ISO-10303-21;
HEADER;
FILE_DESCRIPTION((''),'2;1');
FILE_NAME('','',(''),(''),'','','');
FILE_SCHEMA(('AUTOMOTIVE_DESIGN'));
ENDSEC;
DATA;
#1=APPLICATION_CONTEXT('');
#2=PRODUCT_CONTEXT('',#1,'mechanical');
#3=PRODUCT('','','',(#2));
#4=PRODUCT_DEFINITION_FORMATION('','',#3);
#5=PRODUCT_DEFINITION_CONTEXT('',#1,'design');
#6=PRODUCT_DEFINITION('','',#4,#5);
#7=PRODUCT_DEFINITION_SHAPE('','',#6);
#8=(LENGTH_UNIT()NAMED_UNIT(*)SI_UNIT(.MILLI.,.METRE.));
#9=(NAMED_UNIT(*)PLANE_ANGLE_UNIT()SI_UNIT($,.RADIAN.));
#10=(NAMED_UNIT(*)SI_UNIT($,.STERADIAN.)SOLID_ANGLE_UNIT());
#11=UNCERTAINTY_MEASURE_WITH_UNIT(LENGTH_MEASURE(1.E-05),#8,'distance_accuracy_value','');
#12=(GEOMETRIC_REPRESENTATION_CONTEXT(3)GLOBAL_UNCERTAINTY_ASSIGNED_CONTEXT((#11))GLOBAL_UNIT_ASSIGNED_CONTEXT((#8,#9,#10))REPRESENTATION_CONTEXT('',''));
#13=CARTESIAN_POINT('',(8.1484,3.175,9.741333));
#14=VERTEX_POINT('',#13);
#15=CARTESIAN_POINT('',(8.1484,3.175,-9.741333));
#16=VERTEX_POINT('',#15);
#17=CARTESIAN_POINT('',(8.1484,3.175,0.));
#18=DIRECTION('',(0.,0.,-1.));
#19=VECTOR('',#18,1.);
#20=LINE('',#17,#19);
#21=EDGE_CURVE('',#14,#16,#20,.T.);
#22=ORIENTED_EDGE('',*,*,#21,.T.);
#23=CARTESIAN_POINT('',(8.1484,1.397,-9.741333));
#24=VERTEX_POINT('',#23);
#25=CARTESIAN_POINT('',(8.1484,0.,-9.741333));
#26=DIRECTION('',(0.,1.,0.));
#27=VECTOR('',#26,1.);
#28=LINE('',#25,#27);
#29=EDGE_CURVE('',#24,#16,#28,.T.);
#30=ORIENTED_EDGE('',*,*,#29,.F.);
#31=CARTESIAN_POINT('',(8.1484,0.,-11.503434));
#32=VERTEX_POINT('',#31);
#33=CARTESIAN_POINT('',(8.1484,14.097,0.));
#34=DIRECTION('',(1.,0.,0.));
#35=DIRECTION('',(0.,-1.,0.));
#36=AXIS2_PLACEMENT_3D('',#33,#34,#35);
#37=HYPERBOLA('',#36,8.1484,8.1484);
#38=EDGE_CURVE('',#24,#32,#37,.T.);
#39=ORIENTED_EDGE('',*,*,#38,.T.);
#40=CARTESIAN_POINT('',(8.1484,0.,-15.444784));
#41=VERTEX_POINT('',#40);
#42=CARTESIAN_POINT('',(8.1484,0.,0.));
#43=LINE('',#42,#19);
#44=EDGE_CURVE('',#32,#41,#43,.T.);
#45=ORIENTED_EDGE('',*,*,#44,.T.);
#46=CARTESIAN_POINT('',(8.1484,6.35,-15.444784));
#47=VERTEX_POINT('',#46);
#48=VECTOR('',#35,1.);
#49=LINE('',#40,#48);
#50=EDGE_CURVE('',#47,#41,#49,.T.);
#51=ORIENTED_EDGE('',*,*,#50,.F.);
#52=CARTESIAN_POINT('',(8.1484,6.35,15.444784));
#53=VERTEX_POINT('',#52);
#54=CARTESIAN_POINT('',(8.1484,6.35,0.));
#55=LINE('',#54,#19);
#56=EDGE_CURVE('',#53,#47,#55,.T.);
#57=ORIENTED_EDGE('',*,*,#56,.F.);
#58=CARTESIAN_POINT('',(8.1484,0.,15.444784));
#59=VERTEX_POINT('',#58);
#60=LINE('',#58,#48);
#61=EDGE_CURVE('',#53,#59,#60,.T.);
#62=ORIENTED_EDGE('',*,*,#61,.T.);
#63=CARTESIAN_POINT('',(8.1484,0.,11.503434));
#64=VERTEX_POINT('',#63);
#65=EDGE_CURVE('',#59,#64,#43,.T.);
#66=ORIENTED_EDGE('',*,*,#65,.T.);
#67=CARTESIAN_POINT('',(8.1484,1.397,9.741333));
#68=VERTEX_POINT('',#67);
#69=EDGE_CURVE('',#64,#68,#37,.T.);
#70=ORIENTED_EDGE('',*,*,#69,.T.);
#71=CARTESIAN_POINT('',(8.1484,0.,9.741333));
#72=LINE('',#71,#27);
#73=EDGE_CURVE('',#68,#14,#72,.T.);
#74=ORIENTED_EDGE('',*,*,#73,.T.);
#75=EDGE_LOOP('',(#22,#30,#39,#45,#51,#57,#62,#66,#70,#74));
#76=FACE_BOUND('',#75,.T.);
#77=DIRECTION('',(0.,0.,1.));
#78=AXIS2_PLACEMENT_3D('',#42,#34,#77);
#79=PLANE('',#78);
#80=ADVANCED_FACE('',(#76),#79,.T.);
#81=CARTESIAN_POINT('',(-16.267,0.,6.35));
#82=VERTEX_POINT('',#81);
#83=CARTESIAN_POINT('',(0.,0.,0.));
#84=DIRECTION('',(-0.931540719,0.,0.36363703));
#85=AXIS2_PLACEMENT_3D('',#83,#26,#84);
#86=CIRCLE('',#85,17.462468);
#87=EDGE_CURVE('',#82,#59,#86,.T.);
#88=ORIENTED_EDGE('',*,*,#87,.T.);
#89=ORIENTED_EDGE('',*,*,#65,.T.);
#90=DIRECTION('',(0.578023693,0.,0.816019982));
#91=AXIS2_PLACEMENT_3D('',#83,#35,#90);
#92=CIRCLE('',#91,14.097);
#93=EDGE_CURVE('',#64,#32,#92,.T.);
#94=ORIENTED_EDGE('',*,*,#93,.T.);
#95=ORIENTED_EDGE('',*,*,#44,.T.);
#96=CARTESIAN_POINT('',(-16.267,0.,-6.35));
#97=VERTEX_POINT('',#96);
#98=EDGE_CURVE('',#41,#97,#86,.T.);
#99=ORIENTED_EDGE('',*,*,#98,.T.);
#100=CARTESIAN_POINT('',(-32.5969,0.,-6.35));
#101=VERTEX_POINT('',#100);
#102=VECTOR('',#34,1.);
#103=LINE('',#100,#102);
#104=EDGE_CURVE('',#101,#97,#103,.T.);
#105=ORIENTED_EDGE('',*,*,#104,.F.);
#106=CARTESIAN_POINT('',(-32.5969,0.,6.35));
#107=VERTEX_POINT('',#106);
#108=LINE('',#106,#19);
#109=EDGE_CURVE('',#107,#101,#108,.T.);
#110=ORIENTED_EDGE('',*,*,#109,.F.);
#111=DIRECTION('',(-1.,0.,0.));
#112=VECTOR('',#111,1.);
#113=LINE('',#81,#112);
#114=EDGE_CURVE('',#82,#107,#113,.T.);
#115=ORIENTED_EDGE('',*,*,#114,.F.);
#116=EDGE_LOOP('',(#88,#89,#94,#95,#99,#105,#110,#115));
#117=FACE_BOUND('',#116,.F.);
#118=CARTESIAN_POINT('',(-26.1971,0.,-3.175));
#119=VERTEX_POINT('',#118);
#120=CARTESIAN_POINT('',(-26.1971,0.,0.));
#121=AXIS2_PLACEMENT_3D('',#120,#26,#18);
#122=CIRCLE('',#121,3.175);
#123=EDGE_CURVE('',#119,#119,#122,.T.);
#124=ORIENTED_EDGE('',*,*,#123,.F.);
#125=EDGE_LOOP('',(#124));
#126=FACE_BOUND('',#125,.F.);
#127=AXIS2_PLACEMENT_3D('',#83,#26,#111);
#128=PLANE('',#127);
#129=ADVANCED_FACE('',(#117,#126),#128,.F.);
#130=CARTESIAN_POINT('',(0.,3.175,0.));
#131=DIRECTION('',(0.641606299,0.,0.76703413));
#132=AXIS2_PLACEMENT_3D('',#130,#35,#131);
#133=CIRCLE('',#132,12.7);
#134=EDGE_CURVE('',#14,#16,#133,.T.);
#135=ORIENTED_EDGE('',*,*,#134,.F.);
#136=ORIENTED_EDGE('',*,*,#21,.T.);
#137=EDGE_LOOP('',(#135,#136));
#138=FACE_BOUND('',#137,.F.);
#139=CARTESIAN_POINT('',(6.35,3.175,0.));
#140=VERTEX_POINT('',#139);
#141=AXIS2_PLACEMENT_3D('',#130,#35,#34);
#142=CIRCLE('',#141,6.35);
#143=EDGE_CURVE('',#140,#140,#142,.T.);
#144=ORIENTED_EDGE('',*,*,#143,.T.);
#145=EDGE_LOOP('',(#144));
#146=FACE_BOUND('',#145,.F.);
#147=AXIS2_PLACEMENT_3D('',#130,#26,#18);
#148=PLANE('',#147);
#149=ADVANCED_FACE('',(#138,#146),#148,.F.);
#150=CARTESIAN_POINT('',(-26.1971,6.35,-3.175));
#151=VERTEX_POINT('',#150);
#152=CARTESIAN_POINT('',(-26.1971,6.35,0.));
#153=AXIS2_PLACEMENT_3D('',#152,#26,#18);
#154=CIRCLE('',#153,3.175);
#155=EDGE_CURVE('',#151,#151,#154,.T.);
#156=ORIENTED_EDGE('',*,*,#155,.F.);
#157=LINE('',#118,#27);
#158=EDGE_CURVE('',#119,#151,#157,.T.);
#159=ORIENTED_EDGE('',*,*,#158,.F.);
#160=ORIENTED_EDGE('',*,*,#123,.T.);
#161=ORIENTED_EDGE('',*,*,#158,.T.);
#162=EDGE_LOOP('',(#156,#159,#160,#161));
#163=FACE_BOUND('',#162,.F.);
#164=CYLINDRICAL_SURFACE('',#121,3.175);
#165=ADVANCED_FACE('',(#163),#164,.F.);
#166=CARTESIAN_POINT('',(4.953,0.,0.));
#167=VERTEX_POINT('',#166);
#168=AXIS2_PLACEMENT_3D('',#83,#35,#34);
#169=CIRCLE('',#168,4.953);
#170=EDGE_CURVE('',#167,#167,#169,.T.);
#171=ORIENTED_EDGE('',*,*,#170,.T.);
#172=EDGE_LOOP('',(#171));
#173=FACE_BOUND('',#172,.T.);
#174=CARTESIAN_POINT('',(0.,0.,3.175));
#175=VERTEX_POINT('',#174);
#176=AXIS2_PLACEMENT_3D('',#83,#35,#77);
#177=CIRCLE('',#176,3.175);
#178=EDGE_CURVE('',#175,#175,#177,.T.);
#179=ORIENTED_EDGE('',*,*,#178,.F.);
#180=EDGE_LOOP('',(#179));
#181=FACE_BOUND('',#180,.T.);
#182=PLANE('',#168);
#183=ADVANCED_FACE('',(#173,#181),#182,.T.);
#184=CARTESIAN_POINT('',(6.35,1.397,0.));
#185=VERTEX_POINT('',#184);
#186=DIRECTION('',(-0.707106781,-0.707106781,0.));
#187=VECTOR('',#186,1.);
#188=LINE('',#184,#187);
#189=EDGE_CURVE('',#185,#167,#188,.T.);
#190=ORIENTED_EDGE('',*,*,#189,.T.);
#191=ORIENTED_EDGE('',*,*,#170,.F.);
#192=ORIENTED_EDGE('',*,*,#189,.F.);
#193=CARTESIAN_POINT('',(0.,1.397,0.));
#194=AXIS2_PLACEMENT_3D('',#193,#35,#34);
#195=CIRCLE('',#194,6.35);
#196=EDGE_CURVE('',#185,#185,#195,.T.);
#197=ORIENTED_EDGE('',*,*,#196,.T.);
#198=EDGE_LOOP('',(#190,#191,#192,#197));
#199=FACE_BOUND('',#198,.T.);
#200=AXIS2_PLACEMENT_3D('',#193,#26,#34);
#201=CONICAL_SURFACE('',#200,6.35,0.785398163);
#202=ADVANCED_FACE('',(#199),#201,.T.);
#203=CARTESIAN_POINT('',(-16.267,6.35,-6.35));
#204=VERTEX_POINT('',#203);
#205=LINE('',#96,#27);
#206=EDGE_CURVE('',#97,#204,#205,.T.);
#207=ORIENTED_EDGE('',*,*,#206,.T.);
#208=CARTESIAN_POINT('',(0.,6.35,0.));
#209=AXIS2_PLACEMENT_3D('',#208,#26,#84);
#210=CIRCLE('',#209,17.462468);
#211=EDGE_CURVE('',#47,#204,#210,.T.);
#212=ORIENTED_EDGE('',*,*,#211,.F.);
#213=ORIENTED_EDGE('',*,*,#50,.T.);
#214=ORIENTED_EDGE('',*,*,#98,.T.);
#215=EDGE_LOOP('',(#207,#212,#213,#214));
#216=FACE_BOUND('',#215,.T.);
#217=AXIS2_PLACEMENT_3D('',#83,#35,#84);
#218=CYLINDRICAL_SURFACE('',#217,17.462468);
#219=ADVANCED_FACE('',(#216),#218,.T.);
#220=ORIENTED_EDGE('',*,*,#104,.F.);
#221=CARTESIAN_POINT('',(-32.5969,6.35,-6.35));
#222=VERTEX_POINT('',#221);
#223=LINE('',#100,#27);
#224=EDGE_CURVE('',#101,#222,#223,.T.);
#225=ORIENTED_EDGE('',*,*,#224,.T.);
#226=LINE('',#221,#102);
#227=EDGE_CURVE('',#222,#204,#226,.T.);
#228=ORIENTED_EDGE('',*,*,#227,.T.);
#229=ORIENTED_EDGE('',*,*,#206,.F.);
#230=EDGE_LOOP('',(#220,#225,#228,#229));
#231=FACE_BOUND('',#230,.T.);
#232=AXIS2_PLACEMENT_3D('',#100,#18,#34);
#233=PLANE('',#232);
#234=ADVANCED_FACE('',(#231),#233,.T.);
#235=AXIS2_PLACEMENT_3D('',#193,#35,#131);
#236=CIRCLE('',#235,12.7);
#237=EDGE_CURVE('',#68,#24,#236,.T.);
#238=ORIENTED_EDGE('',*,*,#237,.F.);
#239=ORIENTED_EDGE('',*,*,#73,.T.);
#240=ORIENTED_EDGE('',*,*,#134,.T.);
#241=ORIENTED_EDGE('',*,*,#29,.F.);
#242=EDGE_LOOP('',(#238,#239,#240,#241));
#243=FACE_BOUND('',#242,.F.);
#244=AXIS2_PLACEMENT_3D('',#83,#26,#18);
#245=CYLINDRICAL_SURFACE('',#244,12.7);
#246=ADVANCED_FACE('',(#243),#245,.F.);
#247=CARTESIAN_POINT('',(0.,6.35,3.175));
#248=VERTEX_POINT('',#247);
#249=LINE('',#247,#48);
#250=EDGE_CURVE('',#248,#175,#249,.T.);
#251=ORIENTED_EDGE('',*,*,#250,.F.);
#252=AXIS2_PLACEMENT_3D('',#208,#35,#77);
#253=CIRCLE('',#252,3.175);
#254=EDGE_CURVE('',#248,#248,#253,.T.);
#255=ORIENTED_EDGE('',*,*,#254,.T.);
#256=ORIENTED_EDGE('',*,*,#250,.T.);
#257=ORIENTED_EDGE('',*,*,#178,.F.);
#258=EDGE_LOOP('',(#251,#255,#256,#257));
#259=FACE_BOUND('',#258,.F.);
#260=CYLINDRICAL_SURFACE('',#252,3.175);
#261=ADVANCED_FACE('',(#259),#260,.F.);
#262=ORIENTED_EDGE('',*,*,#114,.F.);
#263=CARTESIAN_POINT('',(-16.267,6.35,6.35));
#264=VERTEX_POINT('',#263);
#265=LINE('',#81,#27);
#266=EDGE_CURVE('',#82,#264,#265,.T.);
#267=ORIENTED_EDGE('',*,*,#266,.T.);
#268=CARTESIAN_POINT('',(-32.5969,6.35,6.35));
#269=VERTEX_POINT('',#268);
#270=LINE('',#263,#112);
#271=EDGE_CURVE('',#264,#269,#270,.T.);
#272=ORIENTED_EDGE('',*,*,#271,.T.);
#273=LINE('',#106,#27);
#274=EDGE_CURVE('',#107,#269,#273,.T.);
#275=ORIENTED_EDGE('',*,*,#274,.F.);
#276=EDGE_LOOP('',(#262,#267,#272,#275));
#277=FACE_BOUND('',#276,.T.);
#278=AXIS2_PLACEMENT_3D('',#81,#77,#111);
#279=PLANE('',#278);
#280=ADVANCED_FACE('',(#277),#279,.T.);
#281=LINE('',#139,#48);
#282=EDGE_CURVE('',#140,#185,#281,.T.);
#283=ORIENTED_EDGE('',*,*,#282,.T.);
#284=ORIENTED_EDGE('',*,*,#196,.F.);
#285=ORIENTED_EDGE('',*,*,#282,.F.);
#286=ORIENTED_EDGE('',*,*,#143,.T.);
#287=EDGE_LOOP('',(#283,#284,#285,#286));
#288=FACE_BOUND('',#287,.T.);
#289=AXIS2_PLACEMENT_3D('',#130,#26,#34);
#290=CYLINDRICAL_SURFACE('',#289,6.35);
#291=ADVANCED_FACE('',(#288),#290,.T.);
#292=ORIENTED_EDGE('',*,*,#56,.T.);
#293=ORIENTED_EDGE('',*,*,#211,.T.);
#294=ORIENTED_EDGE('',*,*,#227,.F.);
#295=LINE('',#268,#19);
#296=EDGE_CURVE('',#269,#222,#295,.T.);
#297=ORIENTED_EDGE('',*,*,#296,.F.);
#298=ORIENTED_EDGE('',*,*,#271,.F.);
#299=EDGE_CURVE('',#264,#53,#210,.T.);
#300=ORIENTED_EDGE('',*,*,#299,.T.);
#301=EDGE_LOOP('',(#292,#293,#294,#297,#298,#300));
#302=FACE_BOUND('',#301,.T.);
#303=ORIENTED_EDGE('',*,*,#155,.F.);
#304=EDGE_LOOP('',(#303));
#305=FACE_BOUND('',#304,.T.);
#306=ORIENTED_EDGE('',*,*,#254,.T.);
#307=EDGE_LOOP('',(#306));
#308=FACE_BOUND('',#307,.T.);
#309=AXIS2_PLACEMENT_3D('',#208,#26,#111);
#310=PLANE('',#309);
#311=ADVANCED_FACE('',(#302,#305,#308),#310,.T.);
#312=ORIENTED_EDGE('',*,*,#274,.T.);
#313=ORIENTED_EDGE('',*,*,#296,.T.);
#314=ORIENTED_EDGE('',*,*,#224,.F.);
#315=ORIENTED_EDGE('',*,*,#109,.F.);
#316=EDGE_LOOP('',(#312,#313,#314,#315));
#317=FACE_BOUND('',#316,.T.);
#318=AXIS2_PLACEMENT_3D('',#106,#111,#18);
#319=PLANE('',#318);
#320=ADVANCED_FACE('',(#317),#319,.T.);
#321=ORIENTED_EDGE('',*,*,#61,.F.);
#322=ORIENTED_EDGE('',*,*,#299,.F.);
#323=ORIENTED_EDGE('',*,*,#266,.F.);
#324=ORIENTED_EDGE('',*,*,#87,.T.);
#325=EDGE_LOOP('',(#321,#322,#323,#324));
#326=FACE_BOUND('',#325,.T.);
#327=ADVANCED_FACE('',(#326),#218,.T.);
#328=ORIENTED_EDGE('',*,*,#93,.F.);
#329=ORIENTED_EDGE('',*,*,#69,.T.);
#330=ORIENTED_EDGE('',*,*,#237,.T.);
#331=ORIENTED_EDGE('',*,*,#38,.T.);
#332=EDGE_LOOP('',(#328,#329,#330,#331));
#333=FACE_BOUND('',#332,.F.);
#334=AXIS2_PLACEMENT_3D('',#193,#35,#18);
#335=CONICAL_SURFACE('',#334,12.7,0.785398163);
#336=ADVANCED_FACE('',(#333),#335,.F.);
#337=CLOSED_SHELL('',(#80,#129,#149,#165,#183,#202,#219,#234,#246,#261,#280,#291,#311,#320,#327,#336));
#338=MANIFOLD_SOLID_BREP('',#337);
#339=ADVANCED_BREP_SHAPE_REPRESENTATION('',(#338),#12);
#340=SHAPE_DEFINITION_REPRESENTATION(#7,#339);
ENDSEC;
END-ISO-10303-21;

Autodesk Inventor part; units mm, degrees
ref_plane "YZ Plane" through (0, 0, 0) normal (1, 0, 0) x (0, 1, 0)
ref_plane "XZ Plane" through (0, 0, 0) normal (0, 1, 0) x (-1, 0, 0)
ref_plane "XY Plane" through (0, 0, 0) normal (0, 0, 1) x (1, 0, 0)
sketch "SketchCircles" plane through (0, 0, 0) normal (0, 1, 0) x (-1, 0, 0)
  circle A0 centre (0, 0) radius 12.7
  circle A1 centre (0, 0) radius 6.35
  line L0 (32.5969, -6.35) -> (16.267, -6.35)
  line L1 (16.267, 6.35) -> (32.5969, 6.35)
  line L2 (32.5969, 6.35) -> (32.5969, -6.35)
  line L3 (32.5969, -6.35) -> (15.4107, 6.35) construction
  line L4 (15.4107, -6.35) -> (32.5969, 6.35) construction
  arc A2 (16.267, 6.35) -> (16.267, -6.35) centre (0, 0) ccw
  point P0 (24.0038, 0)
  dimension "d0" = 25.4
  dimension "d1" = 12.7
extrude "Extrusion100" add sketch "SketchCircles" along normal blind 6.35 contours A0 | A1 | L0 A2 L1 L2
sketch "SketchLines" plane through (0, 0, 0) normal (0, -1, 0) x (1, 0, 0)
  line L0 (-17.7365, 0) -> (17.5532, 0)
  line L1 (-0.0917, 17.7823) -> (-0.0917, -17.324)
  point P0 (0, 0)
hole "Hole1" at (0, 0, 0) direction (0, 1, 0) diameter 25.4 depth 3.175
sketch "Sketch3" plane through (0, 3.175, 0) normal (0, -1, 0) x (1, 0, 0)
  circle A0 centre (0, 0) radius 6.35
  dimension "d12" = 12.7
extrude "Extrusion2" add sketch "Sketch3" along normal blind 3.175
chamfer "Chamfer1" distance 1.397 angle 45 1 edges at (0, 0, 12.7)
chamfer "Chamfer2" distance 1.397 angle 45 1 edges at (-6.35, 0, 0)
sketch "Sketch4" plane through (0, 6.35, 0) normal (0, 1, 0) x (1, 0, 0)
  circle A0 centre (0, 0) radius 3.9688
  point P0 (0, 0)
  dimension "d21" = 7.9375
hole "Hole2" at (0, 6.35, 0) direction (0, -1, 0) diameter 6.35 depth 12.7
sketch "Sketch5" plane through (0, 0, 0) normal (0, -1, 0) x (1, 0, 0)
  line L0 (-18.8474, 0) -> (20.3869, 0)
  circle A0 centre (0, 0) radius 6.35 projected
  line L1 (-18.8474, 0) -> (-26.1971, 0)
  line L2 (8.1484, 0) -> (8.1484, 20.5164)
  point P0 (0, 0)
  point P1 (6.35, 0)
hole "Hole3" at (-26.1971, 0, 0) direction (0, 1, 0) diameter 6.35 end through all
ref_plane "Work Plane4" through (8.1484, 0, 0) normal (1, 0, 0) x (0, 0, 1)
split "Split2" plane through (8.1484, 0, 0) removes the side toward (1, 0, 0)
properties part number "tiedown-hook-mount-clip"
